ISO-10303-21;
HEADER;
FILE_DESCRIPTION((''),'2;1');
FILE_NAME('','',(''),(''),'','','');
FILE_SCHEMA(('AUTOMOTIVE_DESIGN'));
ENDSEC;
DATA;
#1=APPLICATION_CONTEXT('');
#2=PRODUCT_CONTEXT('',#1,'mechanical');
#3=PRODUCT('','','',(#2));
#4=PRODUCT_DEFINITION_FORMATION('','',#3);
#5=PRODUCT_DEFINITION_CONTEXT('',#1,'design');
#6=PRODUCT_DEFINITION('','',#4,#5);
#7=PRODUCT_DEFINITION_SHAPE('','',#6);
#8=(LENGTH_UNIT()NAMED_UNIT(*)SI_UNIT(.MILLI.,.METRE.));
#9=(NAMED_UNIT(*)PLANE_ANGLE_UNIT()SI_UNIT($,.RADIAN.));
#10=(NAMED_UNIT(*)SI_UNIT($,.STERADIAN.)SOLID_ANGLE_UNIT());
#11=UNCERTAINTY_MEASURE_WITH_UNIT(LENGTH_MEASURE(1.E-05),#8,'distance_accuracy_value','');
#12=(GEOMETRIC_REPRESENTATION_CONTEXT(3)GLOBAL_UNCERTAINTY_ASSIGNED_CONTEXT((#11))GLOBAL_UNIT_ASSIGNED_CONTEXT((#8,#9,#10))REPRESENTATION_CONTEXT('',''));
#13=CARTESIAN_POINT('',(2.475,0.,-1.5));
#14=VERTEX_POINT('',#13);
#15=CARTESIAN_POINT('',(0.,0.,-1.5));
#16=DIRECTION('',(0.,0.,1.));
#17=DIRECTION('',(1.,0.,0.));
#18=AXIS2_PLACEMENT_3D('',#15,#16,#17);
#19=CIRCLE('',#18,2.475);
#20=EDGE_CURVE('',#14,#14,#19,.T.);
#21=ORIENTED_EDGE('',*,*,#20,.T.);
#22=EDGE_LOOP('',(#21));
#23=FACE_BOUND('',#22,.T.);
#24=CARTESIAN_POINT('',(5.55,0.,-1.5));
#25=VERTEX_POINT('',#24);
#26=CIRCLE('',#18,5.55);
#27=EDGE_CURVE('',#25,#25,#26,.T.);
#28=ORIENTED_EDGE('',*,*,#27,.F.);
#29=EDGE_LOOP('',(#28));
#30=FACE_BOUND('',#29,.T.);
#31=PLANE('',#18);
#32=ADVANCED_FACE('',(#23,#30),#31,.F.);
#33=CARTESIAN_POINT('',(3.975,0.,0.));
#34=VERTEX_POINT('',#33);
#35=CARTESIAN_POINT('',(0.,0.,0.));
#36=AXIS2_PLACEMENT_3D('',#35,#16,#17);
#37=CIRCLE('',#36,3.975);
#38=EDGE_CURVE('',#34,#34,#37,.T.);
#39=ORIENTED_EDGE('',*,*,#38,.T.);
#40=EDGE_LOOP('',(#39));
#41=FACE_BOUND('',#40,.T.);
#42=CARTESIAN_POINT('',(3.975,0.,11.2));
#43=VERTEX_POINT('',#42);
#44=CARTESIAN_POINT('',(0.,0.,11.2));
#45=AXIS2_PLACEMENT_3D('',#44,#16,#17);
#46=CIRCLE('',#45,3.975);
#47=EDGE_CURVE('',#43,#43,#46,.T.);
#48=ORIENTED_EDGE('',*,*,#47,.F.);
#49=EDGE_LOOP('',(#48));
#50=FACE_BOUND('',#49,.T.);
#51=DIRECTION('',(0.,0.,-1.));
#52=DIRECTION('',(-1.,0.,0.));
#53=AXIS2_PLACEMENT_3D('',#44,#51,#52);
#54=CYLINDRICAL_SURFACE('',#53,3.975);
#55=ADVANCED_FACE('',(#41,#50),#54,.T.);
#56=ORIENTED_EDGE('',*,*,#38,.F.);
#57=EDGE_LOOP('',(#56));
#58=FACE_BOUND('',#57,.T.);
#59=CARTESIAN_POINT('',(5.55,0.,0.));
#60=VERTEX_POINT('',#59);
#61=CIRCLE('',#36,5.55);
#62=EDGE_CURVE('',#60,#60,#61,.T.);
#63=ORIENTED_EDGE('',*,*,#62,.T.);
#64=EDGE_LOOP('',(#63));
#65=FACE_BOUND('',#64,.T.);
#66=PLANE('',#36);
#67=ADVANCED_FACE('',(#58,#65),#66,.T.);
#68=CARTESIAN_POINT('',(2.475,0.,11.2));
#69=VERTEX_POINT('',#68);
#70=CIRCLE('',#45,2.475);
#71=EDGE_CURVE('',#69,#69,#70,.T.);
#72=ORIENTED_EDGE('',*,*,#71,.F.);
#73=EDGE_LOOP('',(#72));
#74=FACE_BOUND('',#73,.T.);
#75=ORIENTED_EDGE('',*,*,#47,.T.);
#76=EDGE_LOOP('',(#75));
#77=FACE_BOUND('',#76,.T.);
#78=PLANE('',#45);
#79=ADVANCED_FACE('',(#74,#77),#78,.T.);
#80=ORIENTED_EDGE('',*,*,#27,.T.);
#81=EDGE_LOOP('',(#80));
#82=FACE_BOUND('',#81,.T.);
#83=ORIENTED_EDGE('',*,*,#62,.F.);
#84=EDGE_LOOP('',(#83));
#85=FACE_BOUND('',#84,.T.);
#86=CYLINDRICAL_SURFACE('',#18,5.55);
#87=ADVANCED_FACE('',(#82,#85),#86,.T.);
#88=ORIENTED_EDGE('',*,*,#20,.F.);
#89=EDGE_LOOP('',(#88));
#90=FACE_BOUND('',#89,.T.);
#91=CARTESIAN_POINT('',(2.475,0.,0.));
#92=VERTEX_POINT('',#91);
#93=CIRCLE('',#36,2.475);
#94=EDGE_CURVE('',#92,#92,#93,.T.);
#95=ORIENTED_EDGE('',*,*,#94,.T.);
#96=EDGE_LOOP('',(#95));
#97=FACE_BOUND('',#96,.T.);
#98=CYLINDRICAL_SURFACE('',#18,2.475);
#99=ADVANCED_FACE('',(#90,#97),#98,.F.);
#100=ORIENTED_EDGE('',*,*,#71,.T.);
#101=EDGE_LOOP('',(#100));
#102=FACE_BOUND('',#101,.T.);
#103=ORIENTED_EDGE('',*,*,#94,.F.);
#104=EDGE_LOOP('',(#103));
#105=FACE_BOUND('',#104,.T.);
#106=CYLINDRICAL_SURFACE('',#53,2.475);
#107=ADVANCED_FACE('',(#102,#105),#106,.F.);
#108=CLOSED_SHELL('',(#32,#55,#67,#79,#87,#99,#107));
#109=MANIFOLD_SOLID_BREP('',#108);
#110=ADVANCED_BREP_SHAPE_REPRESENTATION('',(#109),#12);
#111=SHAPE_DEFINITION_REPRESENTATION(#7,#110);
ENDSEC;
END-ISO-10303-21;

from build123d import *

# Parameters (mm, degrees)
SKETCH1_R           = 5.55
BASE_FLANGE1_DEPTH  = 1.5
SKETCH9_R           = 3.975
SKETCH9_R_2         = 2.475
BOSS_EXTRUDE1_DEPTH = 11.2
SKETCH11_R          = 2.475
CUT_EXTRUDE1_DEPTH  = 14.676439595


# Sheet-metal steps are written as plain solids
with BuildPart() as part:
    # Sketch1 → Base-Flange1 (new body)
    with BuildSketch(Plane.XY):
        Circle(SKETCH1_R)
    extrude(amount=-BASE_FLANGE1_DEPTH)

    # Sketch9 → Boss-Extrude1 (add)
    with BuildSketch(Plane.XY):
        Circle(SKETCH9_R)
        Circle(SKETCH9_R_2, mode=Mode.SUBTRACT)
    extrude(amount=BOSS_EXTRUDE1_DEPTH)

    # Sketch11 → Cut-Extrude1 (cut, through all)
    with BuildSketch(Plane.XY):
        Circle(SKETCH11_R)
    extrude(amount=-CUT_EXTRUDE1_DEPTH, mode=Mode.SUBTRACT)


solid = part.part
